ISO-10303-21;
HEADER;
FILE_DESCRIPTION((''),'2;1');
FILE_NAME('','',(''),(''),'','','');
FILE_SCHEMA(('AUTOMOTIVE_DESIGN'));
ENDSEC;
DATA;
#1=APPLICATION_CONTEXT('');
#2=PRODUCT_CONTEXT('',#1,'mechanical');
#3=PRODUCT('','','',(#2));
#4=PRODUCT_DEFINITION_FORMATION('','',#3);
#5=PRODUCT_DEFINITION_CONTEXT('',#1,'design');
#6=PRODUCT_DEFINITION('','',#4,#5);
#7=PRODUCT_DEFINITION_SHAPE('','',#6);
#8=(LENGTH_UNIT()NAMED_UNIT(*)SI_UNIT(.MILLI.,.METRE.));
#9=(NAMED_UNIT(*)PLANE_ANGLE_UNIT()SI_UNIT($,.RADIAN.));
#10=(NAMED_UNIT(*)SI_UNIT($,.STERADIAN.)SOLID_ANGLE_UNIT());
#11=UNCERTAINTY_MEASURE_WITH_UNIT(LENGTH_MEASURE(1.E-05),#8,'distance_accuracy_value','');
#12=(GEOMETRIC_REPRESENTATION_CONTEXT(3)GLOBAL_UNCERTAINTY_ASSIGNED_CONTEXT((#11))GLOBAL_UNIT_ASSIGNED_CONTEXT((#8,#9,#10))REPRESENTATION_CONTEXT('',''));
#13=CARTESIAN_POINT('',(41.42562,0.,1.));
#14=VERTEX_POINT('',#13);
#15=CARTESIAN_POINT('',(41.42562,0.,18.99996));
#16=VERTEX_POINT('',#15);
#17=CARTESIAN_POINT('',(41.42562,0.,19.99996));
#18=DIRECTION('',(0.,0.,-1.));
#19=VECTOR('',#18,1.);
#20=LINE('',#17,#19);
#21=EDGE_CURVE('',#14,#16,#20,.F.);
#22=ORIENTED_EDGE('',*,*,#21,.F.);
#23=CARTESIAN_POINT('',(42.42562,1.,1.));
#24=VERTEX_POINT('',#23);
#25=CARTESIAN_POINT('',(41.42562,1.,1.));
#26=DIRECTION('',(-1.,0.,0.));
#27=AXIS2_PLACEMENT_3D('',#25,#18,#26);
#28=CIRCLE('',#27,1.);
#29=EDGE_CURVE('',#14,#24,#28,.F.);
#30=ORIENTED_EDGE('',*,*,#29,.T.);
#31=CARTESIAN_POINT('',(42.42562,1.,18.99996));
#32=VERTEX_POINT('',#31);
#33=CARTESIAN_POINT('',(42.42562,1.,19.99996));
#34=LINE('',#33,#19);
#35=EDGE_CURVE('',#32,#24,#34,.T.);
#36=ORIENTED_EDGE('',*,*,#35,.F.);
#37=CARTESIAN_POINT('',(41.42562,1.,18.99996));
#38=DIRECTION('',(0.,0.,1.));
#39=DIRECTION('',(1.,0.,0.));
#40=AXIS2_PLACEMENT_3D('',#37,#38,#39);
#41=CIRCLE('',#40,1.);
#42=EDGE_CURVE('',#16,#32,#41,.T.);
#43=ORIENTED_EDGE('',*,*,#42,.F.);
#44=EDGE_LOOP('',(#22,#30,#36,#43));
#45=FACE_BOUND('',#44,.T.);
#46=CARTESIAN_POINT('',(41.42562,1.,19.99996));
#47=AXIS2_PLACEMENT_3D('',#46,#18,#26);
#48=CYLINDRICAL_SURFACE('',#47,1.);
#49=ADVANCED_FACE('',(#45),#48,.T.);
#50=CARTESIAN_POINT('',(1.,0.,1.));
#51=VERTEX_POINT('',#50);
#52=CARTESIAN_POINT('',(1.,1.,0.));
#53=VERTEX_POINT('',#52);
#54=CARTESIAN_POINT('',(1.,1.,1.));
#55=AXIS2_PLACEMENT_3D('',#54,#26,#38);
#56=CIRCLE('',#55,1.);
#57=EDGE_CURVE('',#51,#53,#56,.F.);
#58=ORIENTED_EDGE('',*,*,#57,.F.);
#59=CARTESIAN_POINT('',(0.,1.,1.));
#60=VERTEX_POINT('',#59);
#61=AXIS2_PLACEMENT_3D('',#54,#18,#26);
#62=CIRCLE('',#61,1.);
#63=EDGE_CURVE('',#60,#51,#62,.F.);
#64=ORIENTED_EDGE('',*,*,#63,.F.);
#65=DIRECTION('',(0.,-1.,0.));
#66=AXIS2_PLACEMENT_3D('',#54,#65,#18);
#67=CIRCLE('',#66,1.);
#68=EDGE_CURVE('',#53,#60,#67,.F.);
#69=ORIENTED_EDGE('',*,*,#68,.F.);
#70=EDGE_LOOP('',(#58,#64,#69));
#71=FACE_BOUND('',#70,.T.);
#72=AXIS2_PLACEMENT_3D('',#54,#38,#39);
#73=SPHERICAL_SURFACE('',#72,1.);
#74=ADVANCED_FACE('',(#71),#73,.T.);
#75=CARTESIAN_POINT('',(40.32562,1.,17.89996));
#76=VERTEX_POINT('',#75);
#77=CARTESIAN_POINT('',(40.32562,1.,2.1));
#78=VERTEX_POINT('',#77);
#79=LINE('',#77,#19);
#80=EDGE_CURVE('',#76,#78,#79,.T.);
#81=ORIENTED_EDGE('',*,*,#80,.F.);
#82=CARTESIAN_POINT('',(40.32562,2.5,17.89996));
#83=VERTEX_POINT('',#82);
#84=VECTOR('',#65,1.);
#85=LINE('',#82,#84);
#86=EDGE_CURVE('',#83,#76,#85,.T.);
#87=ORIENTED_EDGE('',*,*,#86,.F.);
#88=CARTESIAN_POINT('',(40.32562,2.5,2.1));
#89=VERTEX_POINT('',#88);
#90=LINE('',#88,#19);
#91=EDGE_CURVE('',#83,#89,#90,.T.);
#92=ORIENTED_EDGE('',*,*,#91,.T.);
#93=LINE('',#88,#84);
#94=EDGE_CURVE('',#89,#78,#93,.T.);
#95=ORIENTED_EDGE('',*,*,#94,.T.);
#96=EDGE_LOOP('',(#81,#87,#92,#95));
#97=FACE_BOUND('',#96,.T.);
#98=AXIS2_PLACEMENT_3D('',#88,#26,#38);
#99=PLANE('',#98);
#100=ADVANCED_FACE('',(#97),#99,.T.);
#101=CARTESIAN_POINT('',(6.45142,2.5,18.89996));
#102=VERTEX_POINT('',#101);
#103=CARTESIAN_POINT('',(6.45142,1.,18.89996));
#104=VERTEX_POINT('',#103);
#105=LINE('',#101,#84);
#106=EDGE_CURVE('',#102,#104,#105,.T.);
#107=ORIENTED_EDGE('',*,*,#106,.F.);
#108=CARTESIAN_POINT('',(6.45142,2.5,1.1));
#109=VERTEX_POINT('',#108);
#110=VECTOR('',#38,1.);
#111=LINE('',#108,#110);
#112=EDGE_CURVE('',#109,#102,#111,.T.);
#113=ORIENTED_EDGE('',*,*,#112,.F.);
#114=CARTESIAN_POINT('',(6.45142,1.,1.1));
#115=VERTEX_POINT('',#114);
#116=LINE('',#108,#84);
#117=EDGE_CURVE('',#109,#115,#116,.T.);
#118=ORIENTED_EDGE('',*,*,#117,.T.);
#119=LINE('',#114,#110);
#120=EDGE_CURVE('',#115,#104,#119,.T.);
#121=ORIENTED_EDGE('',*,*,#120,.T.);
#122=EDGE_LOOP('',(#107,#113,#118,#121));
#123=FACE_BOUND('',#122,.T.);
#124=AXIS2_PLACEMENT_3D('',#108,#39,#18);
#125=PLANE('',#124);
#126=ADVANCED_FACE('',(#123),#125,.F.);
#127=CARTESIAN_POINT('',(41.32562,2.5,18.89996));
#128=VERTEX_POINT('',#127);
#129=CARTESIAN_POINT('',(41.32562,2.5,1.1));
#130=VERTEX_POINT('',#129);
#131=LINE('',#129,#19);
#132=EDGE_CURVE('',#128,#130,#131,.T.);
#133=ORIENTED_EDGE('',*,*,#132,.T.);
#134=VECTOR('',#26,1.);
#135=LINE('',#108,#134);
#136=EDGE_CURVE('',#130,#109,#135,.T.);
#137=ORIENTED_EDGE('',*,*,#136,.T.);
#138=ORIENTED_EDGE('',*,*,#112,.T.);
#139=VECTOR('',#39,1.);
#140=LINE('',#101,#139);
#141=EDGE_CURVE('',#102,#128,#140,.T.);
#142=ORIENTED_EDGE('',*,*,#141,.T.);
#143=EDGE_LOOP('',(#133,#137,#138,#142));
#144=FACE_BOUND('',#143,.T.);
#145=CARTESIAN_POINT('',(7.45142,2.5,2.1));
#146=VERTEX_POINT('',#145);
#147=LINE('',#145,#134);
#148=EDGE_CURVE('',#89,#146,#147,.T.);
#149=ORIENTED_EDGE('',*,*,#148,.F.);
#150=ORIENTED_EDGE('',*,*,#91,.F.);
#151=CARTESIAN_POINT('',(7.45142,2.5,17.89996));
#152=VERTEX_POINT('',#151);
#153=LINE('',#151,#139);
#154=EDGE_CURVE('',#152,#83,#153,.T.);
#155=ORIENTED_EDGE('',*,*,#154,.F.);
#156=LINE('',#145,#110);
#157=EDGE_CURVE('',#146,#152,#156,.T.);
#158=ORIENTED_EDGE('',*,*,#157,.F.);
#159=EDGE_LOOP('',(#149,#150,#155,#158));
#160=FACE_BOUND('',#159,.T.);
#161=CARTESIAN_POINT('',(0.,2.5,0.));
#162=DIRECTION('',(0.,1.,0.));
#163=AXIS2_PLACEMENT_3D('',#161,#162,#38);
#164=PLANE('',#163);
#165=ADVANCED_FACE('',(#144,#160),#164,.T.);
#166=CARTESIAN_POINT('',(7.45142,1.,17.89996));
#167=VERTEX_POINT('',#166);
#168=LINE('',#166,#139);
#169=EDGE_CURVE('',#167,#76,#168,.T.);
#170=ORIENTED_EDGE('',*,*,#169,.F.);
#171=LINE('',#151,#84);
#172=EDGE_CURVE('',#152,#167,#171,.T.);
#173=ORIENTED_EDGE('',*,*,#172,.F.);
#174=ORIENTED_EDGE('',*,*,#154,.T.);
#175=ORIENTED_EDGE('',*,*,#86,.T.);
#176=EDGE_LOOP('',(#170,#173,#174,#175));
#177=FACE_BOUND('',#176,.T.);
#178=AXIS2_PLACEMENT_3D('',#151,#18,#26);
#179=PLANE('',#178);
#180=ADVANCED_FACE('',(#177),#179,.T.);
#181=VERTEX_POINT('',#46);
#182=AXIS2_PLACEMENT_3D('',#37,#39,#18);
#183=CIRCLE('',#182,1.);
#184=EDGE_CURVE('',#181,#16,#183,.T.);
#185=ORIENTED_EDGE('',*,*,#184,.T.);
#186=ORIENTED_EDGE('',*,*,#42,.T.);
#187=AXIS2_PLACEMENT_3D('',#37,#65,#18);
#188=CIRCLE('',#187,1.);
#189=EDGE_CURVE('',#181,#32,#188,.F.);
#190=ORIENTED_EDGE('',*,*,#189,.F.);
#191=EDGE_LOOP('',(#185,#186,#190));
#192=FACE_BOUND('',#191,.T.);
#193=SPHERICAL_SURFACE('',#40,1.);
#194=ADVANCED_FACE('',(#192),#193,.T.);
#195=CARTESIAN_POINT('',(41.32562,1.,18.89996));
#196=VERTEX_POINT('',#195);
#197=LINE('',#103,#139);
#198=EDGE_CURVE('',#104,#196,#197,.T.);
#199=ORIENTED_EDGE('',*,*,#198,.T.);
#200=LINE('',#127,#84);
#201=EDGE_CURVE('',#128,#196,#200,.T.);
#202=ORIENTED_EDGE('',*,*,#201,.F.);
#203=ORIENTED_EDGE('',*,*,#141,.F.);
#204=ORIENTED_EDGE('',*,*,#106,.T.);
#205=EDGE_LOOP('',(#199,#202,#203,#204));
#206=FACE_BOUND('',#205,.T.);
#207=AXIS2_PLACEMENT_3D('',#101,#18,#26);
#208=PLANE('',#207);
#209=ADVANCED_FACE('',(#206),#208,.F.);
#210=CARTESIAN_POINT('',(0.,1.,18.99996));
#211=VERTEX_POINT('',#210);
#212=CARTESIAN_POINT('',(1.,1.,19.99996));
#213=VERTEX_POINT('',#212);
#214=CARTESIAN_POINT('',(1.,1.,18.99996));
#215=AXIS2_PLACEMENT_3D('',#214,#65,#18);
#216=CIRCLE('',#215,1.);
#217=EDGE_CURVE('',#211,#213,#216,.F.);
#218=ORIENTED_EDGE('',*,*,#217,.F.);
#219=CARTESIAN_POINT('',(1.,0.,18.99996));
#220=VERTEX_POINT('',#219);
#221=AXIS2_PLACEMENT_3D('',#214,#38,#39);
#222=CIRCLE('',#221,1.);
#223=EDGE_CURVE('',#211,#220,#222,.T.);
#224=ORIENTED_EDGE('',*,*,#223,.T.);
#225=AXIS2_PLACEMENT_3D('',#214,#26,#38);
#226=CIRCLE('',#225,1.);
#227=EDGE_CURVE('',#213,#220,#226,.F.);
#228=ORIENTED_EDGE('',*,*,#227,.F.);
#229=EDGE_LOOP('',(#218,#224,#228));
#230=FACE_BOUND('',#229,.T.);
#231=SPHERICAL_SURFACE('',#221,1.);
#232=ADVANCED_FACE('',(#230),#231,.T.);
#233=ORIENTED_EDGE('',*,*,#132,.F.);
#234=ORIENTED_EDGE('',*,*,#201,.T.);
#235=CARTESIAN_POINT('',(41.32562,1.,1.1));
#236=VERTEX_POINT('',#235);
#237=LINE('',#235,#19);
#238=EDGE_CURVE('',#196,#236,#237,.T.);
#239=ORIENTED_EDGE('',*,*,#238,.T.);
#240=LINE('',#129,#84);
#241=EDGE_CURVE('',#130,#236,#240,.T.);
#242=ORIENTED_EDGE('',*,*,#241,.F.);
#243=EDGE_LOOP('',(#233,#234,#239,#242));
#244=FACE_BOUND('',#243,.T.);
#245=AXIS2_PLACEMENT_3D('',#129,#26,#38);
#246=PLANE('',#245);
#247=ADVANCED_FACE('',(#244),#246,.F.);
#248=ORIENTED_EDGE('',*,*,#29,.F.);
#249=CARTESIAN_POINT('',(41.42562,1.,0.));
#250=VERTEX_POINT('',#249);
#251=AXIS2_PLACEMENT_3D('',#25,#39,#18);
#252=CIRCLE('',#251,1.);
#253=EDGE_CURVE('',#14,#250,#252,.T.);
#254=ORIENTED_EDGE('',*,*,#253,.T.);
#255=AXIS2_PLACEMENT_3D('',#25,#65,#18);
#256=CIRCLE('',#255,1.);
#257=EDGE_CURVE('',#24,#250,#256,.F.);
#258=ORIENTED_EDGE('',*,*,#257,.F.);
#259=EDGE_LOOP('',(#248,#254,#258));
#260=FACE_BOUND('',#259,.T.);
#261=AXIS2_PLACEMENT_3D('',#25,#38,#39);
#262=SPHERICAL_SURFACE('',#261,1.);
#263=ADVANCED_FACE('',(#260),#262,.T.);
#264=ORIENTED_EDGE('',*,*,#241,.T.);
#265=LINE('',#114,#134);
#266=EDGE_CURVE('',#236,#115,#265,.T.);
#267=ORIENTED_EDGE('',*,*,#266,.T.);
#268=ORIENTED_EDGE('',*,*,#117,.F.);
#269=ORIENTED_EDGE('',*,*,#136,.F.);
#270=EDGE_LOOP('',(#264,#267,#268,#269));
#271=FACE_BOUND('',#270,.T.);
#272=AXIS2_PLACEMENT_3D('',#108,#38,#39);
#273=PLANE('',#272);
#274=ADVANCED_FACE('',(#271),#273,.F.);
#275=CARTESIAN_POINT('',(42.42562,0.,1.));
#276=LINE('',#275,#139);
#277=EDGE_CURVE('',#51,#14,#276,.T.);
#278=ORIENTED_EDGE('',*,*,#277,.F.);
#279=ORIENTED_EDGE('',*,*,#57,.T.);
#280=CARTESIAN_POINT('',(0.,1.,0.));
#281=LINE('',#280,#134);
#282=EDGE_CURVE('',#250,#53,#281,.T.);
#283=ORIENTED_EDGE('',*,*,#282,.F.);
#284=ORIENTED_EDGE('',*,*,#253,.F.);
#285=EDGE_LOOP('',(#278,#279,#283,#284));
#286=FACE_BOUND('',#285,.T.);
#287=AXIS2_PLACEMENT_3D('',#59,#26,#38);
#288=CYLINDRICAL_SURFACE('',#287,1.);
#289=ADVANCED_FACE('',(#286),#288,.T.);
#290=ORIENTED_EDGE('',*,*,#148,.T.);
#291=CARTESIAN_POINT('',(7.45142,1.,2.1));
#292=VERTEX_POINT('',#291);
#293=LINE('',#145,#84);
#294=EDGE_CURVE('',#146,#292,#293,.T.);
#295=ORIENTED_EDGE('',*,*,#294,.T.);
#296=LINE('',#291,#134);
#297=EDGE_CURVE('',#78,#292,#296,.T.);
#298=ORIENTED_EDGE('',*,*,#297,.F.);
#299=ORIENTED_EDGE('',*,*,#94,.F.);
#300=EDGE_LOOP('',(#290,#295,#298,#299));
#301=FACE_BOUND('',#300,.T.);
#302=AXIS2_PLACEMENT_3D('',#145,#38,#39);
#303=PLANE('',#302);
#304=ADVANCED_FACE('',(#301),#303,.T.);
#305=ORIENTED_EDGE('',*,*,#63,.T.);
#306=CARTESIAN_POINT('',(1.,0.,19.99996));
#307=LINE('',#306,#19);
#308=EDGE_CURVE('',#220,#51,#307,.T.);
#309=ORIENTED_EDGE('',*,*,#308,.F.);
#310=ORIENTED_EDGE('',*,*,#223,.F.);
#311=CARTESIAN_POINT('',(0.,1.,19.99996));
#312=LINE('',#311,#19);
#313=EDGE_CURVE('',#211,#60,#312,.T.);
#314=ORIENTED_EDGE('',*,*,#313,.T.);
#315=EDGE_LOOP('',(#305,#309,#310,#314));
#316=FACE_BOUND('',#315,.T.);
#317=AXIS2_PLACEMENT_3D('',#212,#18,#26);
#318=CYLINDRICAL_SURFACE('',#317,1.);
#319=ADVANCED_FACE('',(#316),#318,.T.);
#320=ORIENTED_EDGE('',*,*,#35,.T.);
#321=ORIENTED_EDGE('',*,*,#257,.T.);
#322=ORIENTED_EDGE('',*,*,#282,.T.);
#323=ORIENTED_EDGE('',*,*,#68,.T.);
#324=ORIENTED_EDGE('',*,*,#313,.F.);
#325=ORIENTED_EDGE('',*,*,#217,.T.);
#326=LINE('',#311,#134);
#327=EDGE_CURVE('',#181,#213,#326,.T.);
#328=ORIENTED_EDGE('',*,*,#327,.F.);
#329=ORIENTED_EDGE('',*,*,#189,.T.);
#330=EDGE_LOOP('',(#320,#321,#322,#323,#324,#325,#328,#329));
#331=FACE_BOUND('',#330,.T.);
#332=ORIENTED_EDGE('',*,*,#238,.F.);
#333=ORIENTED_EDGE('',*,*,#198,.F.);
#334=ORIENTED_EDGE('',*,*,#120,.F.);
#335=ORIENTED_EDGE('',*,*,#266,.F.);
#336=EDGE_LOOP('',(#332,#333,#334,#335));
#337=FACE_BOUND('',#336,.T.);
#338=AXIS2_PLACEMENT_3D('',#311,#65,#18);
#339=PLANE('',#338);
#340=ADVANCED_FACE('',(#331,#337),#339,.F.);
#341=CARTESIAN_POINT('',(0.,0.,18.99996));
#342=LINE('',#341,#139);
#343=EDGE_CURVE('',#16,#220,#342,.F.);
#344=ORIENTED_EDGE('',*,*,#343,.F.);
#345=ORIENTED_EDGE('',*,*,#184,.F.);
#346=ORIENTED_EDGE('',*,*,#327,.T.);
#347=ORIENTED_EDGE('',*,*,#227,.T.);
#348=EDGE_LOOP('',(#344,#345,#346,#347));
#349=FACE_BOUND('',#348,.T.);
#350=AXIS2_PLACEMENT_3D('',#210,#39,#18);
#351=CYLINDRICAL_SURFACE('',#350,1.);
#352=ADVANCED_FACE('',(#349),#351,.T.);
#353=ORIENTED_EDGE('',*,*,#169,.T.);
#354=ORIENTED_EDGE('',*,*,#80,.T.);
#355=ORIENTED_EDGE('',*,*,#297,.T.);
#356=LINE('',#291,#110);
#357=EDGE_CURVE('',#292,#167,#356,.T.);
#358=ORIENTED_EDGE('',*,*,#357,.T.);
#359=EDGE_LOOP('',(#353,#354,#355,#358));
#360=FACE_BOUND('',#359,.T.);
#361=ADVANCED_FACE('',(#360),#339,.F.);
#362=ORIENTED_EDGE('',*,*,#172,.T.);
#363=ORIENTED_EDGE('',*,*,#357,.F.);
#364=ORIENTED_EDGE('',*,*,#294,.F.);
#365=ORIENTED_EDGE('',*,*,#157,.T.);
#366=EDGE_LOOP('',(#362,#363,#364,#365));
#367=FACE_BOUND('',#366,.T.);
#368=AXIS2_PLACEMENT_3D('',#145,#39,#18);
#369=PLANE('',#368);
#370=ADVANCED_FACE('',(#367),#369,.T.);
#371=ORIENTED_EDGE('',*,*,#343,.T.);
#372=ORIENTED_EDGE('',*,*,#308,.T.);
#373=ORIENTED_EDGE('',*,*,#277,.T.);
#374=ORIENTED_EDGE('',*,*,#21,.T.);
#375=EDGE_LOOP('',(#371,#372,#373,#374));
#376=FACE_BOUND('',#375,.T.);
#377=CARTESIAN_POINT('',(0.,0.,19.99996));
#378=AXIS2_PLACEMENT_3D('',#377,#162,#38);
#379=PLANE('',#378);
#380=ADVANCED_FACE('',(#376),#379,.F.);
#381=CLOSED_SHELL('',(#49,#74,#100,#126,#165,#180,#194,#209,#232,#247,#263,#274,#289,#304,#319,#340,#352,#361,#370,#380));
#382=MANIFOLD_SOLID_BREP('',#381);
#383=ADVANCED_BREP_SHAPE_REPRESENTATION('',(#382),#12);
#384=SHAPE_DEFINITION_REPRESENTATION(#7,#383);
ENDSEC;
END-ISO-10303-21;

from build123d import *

# Parameters (mm, degrees)
SKETCH1_W           = 42.42562
SKETCH1_H           = 1
BOSS_EXTRUDE1_DEPTH = 19.99996
FILLET1_R           = 1
SKETCH2_W           = 34.8742
SKETCH2_H           = 17.79996
SKETCH2_W_2         = 32.8742
SKETCH2_H_2         = 15.79996
BOSS_EXTRUDE2_DEPTH = 1.5


with BuildPart() as part:
    # Sketch1 → Boss-Extrude1 (new body)
    with BuildSketch(Plane.XY):
        with Locations((21.21281, 0.5)):
            Rectangle(SKETCH1_W, SKETCH1_H)
    extrude(amount=BOSS_EXTRUDE1_DEPTH)

    # Fillet1
    fillet1_edges = [part.edges().sort_by_distance(p)[0] for p in [
        (42.42562, 0.5, 19.99996),
        (0, 0.5, 19.99996),
        (42.42562, 0.5, 0),
        (21.21281, 0, 0),
        (0, 0.5, 0),
        (21.21281, 0, 19.99996),
        (42.42562, 0, 9.99998),
        (0, 0, 9.99998),
    ]]
    fillet(fillet1_edges, radius=FILLET1_R - 0.0001)  # a hair under: the kernel refuses the full size

    # Sketch2 → Boss-Extrude2 (add)
    with BuildSketch(Plane(origin=(0, 1, 0), x_dir=(1, 0, 0), z_dir=(0, 1, 0))):
        with Locations((23.88852, -9.99998)):
            Rectangle(SKETCH2_W, SKETCH2_H)
        with Locations((23.88852, -9.99998)):
            Rectangle(SKETCH2_W_2, SKETCH2_H_2, mode=Mode.SUBTRACT)
    extrude(amount=BOSS_EXTRUDE2_DEPTH)


solid = part.part
